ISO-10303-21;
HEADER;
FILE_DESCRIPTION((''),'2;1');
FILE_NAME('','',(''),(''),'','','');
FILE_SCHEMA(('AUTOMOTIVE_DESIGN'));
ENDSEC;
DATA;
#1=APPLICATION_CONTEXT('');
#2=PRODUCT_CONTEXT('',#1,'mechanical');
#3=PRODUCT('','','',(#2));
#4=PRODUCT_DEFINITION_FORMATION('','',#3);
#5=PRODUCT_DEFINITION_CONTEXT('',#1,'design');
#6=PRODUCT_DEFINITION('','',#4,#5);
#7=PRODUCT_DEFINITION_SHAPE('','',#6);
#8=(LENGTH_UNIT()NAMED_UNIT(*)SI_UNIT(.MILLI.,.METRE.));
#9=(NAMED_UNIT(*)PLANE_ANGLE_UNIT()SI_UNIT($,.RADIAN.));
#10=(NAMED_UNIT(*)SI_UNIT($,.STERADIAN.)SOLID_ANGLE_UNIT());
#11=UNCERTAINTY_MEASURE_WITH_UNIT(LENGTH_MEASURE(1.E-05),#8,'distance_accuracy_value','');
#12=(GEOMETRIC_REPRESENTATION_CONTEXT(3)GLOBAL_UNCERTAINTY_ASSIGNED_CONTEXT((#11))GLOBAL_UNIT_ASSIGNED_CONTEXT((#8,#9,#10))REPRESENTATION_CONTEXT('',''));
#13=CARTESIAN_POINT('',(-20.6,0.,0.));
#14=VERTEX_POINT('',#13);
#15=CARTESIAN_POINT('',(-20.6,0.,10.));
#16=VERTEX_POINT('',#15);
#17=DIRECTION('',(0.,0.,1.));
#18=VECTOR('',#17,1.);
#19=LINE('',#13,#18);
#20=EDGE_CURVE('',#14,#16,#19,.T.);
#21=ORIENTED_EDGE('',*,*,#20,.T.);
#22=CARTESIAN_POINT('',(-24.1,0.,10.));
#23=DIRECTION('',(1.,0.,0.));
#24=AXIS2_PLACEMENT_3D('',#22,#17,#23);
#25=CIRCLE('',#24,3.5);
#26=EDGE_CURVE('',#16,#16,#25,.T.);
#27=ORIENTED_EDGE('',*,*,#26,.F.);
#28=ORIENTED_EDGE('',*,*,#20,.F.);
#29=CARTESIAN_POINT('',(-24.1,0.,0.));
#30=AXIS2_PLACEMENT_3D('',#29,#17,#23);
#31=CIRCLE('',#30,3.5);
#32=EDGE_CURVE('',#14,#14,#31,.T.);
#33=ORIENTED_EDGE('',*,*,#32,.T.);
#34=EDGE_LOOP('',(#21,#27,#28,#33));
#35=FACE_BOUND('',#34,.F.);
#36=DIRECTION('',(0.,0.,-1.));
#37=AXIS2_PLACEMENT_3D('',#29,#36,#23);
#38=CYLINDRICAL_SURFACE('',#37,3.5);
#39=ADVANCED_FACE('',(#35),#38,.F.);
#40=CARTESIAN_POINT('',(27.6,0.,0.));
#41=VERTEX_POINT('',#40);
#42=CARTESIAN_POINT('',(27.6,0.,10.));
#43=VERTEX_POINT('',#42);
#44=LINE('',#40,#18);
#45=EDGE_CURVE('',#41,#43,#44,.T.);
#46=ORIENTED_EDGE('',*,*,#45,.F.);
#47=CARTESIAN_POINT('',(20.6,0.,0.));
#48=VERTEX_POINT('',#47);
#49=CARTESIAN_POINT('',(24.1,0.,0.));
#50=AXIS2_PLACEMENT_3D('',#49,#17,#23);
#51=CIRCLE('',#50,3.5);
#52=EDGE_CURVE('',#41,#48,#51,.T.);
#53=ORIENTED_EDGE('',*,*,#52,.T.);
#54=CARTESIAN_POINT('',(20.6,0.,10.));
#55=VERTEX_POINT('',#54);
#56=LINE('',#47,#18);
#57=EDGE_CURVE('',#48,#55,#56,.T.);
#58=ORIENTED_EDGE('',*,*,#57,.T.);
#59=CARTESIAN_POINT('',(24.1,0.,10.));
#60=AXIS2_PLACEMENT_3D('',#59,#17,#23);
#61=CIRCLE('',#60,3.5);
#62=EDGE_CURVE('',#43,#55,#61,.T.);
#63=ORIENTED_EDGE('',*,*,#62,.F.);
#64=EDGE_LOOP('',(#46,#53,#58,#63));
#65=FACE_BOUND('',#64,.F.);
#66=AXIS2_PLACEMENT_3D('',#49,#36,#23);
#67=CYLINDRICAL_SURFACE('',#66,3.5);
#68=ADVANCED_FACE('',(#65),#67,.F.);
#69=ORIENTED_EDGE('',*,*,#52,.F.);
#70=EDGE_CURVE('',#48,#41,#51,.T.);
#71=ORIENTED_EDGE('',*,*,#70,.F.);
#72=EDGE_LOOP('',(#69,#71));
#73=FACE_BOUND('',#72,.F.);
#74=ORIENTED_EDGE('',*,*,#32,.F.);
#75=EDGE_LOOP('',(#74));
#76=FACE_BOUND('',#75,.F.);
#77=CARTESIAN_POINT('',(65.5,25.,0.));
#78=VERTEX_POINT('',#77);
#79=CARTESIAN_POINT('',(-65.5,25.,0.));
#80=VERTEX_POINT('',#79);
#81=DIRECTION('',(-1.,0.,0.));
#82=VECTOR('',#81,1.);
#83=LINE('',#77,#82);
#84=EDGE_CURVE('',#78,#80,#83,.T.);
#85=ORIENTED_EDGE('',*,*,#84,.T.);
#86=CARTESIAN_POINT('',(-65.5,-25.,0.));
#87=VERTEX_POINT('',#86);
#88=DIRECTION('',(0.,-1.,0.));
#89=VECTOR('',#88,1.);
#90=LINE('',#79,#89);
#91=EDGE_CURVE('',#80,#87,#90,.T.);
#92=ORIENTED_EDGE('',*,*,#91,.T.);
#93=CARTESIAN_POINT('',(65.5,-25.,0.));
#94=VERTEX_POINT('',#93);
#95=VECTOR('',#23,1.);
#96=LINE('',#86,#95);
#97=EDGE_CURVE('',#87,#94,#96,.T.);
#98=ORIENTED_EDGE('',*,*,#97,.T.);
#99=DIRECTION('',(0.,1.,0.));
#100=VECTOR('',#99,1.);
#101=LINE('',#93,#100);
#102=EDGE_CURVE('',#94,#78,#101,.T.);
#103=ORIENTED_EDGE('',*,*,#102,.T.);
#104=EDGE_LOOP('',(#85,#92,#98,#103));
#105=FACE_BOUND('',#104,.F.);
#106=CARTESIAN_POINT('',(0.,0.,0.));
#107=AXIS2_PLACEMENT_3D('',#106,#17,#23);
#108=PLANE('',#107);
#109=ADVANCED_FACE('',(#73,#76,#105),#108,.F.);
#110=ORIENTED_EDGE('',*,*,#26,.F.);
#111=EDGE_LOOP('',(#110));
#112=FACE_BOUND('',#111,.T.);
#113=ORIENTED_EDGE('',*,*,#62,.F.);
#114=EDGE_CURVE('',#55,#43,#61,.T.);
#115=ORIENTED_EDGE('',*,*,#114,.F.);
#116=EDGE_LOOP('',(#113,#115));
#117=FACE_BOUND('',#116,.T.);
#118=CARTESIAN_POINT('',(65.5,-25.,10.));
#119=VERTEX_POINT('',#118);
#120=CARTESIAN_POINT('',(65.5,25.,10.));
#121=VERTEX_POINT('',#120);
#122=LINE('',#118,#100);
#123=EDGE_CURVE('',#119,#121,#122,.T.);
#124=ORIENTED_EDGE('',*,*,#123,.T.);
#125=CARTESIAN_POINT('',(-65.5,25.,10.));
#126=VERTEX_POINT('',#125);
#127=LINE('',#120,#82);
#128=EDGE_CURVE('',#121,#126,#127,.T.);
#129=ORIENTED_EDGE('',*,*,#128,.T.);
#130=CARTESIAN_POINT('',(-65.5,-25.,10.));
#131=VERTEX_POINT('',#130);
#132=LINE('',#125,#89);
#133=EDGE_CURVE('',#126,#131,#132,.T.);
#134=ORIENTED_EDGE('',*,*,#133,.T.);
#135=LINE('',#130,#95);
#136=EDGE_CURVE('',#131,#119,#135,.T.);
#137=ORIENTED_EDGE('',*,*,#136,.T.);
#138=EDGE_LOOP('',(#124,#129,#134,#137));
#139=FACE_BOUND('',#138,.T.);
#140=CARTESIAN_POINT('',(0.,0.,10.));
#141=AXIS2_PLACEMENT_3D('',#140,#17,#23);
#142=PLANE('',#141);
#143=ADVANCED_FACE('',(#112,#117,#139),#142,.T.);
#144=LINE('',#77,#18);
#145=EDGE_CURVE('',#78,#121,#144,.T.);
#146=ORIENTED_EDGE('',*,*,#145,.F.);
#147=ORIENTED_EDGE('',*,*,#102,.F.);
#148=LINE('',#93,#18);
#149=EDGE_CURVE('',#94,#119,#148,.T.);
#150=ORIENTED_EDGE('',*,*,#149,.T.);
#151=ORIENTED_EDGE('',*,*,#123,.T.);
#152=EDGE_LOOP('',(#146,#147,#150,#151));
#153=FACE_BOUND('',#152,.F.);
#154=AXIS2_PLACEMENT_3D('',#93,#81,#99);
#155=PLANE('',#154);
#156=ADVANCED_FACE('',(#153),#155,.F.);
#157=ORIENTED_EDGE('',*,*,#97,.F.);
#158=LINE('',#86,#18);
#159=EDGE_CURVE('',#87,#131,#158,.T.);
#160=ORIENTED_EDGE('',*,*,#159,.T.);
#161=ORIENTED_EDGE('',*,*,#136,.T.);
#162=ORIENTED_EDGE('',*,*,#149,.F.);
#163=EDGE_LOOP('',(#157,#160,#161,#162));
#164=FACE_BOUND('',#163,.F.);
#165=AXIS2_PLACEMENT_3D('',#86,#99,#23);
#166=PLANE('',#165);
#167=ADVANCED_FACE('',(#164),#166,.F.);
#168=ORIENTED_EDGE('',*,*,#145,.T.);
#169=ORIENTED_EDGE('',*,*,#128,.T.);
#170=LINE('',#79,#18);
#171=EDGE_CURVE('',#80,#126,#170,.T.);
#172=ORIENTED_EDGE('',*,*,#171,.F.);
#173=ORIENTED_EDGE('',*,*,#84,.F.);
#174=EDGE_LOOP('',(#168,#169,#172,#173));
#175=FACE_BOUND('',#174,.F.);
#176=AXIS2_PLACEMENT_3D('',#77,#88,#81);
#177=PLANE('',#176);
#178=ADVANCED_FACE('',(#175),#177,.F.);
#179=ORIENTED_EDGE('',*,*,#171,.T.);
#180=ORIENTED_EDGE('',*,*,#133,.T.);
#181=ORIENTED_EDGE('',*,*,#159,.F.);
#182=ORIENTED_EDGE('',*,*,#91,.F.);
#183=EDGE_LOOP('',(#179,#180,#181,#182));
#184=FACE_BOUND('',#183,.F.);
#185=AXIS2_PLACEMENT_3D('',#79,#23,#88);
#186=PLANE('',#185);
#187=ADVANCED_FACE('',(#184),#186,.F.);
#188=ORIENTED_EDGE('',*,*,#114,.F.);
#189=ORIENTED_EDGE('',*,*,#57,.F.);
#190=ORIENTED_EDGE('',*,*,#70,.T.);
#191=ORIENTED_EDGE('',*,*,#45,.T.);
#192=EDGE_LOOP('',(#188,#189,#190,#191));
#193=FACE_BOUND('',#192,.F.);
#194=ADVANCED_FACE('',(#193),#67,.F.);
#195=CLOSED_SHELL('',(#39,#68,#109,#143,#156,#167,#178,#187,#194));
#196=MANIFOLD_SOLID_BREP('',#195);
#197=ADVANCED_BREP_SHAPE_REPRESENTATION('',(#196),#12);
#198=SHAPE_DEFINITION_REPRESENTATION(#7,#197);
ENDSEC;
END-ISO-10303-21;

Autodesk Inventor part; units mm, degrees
ref_plane "YZ Plane" through (0, 0, 0) normal (1, 0, 0) x (0, 1, 0)
ref_plane "XZ Plane" through (0, 0, 0) normal (0, 1, 0) x (-1, 0, 0)
ref_plane "XY Plane" through (0, 0, 0) normal (0, 0, 1) x (1, 0, 0)
sketch "Sketch1" plane through (0, 0, 0) normal (0, 0, 1) x (1, 0, 0)
  line L0 (65.5, 25) -> (-65.5, 25)
  line L1 (-65.5, 25) -> (-65.5, -25)
  line L2 (-65.5, -25) -> (65.5, -25)
  line L3 (65.5, -25) -> (65.5, 25)
  line L4 (65.5, 25) -> (-65.5, -25) construction
  line L5 (-65.5, 25) -> (65.5, -25) construction
  line L6 (0, 0) -> (-24.1, 0)
  line L7 (0, 0) -> (24.1, 0)
  circle A0 centre (-24.1, 0) radius 3.5
  circle A1 centre (24.1, 0) radius 3.5
  dimension "d0" = 131
  dimension "d1" = 50
  dimension "d2" = 24.1
  dimension "d3" = 24.1
  dimension "d4" = 7
  dimension "d5" = 7
extrude "Extrusion1" add sketch "Sketch1" along normal blind 10
properties part number "prepazka_bez_loziska"
